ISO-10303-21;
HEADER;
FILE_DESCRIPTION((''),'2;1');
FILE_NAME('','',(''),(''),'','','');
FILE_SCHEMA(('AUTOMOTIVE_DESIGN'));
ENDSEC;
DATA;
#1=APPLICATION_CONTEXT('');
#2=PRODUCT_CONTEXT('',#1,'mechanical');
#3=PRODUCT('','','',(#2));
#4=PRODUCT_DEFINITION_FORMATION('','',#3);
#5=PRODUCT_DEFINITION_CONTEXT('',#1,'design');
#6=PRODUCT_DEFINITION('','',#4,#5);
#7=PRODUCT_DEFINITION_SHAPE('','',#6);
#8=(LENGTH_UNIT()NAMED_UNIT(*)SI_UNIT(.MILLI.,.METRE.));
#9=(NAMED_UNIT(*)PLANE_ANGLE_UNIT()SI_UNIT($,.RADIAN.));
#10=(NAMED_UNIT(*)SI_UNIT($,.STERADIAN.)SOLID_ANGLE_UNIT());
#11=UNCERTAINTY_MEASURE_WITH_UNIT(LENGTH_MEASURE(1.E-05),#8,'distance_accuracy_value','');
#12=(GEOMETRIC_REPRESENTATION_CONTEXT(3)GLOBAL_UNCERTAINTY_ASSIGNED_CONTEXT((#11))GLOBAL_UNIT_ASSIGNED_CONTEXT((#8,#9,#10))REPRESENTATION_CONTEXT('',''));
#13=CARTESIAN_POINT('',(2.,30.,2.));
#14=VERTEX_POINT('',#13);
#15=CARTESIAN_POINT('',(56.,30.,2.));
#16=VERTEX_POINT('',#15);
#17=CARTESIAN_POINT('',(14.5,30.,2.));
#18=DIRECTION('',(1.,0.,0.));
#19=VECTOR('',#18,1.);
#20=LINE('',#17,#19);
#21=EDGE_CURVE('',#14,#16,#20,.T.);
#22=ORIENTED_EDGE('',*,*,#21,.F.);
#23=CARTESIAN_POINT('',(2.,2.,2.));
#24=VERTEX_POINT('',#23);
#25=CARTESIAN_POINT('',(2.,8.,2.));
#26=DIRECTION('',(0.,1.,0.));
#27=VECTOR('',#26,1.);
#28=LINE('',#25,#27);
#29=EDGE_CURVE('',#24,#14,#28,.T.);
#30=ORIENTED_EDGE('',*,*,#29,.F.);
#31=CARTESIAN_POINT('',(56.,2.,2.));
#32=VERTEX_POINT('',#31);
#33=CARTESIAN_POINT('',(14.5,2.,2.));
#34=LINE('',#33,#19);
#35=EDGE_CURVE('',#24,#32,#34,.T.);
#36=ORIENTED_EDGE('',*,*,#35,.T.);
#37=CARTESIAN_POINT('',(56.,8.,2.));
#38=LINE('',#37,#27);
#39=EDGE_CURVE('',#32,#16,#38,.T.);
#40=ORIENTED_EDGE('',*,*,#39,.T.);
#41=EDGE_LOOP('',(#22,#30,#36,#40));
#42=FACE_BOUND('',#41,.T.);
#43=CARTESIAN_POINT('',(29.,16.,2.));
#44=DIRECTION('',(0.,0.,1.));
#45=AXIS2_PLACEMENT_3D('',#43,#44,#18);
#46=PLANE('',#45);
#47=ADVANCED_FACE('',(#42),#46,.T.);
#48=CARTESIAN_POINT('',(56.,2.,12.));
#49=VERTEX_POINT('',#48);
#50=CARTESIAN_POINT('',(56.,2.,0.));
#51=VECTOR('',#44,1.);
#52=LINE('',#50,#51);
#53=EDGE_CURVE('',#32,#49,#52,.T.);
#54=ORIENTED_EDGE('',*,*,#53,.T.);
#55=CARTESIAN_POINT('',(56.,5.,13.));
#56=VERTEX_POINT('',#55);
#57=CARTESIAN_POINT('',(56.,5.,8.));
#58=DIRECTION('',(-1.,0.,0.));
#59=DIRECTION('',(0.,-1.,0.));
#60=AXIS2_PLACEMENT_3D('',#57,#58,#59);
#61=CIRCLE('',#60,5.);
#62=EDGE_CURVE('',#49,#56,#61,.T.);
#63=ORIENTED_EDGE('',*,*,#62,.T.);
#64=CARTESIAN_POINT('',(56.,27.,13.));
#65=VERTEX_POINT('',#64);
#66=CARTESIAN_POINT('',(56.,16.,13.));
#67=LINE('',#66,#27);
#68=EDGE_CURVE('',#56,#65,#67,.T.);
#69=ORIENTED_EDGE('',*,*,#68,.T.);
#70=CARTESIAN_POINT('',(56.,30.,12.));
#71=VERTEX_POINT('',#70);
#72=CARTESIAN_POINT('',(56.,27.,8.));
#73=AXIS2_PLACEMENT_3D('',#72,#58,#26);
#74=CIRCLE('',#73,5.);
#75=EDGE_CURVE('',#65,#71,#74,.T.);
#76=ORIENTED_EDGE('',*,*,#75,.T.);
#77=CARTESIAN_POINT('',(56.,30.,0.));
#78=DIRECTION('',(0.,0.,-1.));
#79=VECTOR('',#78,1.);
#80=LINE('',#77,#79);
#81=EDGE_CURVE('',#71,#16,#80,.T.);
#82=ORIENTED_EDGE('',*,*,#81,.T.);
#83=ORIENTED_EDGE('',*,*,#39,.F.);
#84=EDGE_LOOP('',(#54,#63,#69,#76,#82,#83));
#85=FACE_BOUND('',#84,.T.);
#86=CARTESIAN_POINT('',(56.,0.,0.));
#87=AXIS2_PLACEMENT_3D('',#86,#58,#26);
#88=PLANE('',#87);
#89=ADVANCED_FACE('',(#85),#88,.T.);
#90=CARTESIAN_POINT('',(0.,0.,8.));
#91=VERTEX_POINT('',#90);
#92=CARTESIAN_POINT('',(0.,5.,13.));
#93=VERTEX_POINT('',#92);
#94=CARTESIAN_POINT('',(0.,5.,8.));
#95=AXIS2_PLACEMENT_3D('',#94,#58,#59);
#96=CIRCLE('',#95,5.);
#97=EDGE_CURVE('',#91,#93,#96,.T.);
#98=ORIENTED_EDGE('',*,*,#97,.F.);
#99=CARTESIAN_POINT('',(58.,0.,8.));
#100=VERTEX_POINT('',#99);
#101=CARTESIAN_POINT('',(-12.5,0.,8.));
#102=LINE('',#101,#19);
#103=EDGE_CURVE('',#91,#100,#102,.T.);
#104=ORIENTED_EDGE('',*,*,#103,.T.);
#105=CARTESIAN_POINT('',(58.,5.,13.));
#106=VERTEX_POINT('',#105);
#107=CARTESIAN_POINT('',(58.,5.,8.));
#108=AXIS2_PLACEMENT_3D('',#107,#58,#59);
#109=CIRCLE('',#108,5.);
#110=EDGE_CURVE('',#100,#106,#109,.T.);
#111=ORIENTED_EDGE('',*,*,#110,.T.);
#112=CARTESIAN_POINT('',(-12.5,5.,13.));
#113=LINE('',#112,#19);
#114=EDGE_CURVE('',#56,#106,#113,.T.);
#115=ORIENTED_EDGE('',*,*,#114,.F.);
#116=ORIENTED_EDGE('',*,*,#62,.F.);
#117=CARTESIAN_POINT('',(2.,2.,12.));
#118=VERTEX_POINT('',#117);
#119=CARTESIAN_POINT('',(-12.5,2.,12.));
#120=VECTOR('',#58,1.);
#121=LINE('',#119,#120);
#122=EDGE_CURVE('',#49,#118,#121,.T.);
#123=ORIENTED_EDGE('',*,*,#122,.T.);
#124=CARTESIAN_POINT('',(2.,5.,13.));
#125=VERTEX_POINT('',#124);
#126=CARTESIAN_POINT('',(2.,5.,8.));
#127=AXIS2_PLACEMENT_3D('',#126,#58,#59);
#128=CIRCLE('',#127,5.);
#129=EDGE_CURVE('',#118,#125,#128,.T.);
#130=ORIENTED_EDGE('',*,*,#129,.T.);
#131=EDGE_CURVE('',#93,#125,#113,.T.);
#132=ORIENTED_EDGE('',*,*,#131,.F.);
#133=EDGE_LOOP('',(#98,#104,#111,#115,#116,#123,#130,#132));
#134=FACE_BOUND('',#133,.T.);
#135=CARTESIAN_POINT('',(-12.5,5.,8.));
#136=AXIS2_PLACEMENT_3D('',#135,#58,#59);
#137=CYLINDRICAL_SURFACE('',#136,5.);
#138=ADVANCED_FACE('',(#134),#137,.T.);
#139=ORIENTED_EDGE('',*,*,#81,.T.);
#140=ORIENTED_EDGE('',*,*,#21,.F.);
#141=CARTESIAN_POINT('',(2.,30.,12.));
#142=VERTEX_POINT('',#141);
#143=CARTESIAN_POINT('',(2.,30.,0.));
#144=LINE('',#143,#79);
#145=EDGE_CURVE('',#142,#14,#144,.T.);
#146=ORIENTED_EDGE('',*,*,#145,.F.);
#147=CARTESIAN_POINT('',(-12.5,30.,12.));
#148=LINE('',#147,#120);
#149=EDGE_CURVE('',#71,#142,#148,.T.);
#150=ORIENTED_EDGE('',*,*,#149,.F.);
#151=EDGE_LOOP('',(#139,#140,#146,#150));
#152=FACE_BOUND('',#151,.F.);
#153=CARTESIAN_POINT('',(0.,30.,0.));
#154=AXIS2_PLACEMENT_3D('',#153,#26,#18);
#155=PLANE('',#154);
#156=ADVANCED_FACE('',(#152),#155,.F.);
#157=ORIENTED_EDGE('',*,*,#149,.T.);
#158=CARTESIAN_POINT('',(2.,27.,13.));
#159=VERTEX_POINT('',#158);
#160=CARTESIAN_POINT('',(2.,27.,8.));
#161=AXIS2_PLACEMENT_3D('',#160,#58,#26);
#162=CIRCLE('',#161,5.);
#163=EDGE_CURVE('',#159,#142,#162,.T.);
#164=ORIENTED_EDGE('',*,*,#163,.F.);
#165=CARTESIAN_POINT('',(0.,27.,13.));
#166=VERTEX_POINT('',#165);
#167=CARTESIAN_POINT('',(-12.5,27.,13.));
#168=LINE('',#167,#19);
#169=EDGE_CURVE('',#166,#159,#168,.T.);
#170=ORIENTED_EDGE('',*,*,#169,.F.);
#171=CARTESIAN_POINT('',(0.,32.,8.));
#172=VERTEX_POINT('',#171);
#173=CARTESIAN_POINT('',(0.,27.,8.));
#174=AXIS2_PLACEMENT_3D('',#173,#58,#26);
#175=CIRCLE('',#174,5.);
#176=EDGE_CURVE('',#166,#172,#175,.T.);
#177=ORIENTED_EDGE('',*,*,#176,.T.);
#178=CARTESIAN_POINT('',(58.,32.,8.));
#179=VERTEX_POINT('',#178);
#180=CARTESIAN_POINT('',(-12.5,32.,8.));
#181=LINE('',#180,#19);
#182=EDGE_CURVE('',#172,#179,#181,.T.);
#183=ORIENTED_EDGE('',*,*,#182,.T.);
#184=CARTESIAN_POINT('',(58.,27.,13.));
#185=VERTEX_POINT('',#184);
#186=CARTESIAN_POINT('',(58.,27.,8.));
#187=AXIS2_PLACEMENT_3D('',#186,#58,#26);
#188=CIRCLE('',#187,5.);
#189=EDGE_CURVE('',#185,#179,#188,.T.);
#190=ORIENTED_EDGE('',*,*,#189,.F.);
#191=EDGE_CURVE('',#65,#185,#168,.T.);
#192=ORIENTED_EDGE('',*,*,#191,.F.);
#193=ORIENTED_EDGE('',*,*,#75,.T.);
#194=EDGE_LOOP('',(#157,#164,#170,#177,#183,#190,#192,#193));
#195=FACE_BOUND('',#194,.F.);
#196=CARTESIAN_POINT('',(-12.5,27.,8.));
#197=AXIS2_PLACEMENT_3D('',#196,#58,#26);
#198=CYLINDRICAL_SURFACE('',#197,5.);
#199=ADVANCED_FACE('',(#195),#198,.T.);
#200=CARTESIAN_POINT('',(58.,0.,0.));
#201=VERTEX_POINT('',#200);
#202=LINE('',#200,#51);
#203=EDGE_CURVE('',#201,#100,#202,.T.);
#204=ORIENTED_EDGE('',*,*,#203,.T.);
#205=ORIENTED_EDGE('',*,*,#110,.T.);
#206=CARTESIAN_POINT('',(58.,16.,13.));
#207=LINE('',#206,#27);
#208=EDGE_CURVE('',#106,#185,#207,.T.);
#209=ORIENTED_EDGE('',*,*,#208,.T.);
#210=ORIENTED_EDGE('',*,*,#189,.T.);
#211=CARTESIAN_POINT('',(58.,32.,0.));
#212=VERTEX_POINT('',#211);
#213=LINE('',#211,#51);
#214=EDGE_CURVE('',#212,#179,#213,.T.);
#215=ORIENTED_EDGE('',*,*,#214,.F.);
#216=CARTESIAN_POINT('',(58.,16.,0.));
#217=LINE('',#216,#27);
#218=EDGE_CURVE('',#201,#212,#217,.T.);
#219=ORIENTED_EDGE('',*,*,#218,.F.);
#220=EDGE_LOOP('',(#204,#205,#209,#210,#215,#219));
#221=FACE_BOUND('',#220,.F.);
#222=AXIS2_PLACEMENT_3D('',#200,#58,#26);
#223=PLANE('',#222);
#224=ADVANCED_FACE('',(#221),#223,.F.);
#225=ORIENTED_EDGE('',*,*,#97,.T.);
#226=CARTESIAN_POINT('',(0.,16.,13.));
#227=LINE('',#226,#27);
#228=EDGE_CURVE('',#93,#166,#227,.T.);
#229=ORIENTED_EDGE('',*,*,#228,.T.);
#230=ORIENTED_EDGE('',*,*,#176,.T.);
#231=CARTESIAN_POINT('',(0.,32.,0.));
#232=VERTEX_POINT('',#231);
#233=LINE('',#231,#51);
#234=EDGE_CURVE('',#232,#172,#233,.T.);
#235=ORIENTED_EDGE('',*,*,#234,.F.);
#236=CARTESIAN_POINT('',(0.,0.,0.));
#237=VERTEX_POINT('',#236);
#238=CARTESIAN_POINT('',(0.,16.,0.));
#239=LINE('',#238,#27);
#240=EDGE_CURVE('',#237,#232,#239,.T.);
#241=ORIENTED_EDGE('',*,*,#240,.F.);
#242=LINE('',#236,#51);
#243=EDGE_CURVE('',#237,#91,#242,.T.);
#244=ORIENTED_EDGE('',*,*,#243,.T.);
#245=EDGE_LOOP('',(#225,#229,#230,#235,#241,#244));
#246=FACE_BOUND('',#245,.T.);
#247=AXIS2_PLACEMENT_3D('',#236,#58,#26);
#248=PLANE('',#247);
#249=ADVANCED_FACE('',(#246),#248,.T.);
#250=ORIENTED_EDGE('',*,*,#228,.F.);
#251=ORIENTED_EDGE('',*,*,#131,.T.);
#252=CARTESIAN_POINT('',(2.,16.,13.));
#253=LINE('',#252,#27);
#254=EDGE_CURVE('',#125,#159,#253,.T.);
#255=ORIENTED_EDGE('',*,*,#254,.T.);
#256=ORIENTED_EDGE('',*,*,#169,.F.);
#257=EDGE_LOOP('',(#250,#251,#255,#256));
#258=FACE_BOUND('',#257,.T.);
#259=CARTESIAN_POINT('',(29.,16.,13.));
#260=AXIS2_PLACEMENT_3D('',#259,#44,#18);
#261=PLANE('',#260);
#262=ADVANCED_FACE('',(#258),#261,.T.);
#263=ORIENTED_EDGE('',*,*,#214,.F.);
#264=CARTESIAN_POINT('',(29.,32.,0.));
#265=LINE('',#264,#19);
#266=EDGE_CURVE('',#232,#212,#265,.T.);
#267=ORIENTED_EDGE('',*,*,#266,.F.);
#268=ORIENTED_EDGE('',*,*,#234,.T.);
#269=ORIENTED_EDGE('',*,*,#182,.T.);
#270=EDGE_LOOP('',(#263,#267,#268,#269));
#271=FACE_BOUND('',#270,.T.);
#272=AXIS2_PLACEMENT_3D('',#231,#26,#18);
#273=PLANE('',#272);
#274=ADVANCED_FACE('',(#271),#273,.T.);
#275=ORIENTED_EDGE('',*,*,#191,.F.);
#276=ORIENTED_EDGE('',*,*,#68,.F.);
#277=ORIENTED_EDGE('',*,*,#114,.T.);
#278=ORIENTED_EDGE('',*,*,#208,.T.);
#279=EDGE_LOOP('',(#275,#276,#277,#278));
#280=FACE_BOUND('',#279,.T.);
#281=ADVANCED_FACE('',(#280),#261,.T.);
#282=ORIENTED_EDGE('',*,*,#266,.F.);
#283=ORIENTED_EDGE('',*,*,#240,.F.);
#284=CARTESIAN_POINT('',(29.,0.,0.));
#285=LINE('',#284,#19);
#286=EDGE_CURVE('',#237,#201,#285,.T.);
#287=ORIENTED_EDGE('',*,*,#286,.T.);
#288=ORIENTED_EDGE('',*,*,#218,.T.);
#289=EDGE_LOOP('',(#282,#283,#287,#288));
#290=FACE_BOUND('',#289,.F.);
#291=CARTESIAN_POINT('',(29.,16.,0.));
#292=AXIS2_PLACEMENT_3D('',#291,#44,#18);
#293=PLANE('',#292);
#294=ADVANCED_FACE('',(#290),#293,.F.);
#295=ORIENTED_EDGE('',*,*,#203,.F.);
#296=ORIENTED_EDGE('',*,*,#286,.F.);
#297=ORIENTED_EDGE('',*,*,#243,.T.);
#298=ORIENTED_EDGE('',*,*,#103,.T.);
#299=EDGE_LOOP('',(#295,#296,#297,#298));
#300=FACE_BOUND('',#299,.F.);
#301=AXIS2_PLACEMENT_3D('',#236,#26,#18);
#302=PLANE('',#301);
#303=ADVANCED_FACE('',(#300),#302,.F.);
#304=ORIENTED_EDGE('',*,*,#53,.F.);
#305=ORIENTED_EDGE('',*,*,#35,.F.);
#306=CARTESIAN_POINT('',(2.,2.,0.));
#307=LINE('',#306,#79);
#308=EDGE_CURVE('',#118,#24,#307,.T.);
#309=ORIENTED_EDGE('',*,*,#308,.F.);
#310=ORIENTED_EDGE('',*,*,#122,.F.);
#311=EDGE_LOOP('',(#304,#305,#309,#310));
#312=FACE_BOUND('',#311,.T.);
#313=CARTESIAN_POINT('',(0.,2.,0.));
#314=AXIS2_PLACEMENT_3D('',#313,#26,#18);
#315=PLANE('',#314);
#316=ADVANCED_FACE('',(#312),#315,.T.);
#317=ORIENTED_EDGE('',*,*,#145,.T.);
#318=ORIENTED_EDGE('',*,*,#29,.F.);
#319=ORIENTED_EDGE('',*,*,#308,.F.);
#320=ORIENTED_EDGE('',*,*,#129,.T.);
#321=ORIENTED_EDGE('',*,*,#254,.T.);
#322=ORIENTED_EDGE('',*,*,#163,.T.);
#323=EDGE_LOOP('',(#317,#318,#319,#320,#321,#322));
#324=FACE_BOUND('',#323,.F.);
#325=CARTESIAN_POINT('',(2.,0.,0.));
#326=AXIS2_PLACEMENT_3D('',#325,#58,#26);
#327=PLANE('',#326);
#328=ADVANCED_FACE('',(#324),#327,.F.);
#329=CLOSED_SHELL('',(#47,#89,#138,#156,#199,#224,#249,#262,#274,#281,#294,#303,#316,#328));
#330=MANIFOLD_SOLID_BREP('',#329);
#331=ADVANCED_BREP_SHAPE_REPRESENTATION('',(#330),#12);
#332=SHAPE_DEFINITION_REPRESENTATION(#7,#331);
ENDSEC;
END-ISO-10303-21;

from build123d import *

# Parameters (mm, degrees)
F0_W        = 58
F0_H        = 32
F1_DEPTH    = 13
F2_T        = -2
F3_T1_DEPTH = 83


# Not quite as in the source:
# - a fillet or chamfer that OpenCascade refuses, or shapes differently, is made with other operations: its cross-section is extruded or revolved along the edge and cut away or added


with BuildPart() as f1:
    # F0 (on Top) → F1 (new body)
    with BuildSketch(Plane.XY):
        with Locations((29, 16)):
            Rectangle(F0_W, F0_H)
    extrude(amount=F1_DEPTH)

    # F2
    f2_openings = [f1.faces().sort_by_distance(p)[0] for p in [
        (29, 16, 13),
    ]]
    offset(amount=F2_T, openings=f2_openings)

    # F3: fillet of radius 5 on 2 edges, made by hand

    # F3_s2 → F3_t1 (cut)
    with BuildSketch(Plane.YZ.offset(-12.5)):
        with BuildLine():
            ThreePointArc((0, 8), (1.4644660941, 11.5355339059), (5, 13))
            Line((5, 13), (0, 13))
            Line((0, 13), (0, 8))
        make_face()
        with BuildLine():
            ThreePointArc((32, 8), (30.5355339059, 11.5355339059), (27, 13))
            Line((27, 13), (32, 13))
            Line((32, 13), (32, 8))
        make_face()
    extrude(amount=F3_T1_DEPTH, mode=Mode.SUBTRACT)


solid = f1.part
